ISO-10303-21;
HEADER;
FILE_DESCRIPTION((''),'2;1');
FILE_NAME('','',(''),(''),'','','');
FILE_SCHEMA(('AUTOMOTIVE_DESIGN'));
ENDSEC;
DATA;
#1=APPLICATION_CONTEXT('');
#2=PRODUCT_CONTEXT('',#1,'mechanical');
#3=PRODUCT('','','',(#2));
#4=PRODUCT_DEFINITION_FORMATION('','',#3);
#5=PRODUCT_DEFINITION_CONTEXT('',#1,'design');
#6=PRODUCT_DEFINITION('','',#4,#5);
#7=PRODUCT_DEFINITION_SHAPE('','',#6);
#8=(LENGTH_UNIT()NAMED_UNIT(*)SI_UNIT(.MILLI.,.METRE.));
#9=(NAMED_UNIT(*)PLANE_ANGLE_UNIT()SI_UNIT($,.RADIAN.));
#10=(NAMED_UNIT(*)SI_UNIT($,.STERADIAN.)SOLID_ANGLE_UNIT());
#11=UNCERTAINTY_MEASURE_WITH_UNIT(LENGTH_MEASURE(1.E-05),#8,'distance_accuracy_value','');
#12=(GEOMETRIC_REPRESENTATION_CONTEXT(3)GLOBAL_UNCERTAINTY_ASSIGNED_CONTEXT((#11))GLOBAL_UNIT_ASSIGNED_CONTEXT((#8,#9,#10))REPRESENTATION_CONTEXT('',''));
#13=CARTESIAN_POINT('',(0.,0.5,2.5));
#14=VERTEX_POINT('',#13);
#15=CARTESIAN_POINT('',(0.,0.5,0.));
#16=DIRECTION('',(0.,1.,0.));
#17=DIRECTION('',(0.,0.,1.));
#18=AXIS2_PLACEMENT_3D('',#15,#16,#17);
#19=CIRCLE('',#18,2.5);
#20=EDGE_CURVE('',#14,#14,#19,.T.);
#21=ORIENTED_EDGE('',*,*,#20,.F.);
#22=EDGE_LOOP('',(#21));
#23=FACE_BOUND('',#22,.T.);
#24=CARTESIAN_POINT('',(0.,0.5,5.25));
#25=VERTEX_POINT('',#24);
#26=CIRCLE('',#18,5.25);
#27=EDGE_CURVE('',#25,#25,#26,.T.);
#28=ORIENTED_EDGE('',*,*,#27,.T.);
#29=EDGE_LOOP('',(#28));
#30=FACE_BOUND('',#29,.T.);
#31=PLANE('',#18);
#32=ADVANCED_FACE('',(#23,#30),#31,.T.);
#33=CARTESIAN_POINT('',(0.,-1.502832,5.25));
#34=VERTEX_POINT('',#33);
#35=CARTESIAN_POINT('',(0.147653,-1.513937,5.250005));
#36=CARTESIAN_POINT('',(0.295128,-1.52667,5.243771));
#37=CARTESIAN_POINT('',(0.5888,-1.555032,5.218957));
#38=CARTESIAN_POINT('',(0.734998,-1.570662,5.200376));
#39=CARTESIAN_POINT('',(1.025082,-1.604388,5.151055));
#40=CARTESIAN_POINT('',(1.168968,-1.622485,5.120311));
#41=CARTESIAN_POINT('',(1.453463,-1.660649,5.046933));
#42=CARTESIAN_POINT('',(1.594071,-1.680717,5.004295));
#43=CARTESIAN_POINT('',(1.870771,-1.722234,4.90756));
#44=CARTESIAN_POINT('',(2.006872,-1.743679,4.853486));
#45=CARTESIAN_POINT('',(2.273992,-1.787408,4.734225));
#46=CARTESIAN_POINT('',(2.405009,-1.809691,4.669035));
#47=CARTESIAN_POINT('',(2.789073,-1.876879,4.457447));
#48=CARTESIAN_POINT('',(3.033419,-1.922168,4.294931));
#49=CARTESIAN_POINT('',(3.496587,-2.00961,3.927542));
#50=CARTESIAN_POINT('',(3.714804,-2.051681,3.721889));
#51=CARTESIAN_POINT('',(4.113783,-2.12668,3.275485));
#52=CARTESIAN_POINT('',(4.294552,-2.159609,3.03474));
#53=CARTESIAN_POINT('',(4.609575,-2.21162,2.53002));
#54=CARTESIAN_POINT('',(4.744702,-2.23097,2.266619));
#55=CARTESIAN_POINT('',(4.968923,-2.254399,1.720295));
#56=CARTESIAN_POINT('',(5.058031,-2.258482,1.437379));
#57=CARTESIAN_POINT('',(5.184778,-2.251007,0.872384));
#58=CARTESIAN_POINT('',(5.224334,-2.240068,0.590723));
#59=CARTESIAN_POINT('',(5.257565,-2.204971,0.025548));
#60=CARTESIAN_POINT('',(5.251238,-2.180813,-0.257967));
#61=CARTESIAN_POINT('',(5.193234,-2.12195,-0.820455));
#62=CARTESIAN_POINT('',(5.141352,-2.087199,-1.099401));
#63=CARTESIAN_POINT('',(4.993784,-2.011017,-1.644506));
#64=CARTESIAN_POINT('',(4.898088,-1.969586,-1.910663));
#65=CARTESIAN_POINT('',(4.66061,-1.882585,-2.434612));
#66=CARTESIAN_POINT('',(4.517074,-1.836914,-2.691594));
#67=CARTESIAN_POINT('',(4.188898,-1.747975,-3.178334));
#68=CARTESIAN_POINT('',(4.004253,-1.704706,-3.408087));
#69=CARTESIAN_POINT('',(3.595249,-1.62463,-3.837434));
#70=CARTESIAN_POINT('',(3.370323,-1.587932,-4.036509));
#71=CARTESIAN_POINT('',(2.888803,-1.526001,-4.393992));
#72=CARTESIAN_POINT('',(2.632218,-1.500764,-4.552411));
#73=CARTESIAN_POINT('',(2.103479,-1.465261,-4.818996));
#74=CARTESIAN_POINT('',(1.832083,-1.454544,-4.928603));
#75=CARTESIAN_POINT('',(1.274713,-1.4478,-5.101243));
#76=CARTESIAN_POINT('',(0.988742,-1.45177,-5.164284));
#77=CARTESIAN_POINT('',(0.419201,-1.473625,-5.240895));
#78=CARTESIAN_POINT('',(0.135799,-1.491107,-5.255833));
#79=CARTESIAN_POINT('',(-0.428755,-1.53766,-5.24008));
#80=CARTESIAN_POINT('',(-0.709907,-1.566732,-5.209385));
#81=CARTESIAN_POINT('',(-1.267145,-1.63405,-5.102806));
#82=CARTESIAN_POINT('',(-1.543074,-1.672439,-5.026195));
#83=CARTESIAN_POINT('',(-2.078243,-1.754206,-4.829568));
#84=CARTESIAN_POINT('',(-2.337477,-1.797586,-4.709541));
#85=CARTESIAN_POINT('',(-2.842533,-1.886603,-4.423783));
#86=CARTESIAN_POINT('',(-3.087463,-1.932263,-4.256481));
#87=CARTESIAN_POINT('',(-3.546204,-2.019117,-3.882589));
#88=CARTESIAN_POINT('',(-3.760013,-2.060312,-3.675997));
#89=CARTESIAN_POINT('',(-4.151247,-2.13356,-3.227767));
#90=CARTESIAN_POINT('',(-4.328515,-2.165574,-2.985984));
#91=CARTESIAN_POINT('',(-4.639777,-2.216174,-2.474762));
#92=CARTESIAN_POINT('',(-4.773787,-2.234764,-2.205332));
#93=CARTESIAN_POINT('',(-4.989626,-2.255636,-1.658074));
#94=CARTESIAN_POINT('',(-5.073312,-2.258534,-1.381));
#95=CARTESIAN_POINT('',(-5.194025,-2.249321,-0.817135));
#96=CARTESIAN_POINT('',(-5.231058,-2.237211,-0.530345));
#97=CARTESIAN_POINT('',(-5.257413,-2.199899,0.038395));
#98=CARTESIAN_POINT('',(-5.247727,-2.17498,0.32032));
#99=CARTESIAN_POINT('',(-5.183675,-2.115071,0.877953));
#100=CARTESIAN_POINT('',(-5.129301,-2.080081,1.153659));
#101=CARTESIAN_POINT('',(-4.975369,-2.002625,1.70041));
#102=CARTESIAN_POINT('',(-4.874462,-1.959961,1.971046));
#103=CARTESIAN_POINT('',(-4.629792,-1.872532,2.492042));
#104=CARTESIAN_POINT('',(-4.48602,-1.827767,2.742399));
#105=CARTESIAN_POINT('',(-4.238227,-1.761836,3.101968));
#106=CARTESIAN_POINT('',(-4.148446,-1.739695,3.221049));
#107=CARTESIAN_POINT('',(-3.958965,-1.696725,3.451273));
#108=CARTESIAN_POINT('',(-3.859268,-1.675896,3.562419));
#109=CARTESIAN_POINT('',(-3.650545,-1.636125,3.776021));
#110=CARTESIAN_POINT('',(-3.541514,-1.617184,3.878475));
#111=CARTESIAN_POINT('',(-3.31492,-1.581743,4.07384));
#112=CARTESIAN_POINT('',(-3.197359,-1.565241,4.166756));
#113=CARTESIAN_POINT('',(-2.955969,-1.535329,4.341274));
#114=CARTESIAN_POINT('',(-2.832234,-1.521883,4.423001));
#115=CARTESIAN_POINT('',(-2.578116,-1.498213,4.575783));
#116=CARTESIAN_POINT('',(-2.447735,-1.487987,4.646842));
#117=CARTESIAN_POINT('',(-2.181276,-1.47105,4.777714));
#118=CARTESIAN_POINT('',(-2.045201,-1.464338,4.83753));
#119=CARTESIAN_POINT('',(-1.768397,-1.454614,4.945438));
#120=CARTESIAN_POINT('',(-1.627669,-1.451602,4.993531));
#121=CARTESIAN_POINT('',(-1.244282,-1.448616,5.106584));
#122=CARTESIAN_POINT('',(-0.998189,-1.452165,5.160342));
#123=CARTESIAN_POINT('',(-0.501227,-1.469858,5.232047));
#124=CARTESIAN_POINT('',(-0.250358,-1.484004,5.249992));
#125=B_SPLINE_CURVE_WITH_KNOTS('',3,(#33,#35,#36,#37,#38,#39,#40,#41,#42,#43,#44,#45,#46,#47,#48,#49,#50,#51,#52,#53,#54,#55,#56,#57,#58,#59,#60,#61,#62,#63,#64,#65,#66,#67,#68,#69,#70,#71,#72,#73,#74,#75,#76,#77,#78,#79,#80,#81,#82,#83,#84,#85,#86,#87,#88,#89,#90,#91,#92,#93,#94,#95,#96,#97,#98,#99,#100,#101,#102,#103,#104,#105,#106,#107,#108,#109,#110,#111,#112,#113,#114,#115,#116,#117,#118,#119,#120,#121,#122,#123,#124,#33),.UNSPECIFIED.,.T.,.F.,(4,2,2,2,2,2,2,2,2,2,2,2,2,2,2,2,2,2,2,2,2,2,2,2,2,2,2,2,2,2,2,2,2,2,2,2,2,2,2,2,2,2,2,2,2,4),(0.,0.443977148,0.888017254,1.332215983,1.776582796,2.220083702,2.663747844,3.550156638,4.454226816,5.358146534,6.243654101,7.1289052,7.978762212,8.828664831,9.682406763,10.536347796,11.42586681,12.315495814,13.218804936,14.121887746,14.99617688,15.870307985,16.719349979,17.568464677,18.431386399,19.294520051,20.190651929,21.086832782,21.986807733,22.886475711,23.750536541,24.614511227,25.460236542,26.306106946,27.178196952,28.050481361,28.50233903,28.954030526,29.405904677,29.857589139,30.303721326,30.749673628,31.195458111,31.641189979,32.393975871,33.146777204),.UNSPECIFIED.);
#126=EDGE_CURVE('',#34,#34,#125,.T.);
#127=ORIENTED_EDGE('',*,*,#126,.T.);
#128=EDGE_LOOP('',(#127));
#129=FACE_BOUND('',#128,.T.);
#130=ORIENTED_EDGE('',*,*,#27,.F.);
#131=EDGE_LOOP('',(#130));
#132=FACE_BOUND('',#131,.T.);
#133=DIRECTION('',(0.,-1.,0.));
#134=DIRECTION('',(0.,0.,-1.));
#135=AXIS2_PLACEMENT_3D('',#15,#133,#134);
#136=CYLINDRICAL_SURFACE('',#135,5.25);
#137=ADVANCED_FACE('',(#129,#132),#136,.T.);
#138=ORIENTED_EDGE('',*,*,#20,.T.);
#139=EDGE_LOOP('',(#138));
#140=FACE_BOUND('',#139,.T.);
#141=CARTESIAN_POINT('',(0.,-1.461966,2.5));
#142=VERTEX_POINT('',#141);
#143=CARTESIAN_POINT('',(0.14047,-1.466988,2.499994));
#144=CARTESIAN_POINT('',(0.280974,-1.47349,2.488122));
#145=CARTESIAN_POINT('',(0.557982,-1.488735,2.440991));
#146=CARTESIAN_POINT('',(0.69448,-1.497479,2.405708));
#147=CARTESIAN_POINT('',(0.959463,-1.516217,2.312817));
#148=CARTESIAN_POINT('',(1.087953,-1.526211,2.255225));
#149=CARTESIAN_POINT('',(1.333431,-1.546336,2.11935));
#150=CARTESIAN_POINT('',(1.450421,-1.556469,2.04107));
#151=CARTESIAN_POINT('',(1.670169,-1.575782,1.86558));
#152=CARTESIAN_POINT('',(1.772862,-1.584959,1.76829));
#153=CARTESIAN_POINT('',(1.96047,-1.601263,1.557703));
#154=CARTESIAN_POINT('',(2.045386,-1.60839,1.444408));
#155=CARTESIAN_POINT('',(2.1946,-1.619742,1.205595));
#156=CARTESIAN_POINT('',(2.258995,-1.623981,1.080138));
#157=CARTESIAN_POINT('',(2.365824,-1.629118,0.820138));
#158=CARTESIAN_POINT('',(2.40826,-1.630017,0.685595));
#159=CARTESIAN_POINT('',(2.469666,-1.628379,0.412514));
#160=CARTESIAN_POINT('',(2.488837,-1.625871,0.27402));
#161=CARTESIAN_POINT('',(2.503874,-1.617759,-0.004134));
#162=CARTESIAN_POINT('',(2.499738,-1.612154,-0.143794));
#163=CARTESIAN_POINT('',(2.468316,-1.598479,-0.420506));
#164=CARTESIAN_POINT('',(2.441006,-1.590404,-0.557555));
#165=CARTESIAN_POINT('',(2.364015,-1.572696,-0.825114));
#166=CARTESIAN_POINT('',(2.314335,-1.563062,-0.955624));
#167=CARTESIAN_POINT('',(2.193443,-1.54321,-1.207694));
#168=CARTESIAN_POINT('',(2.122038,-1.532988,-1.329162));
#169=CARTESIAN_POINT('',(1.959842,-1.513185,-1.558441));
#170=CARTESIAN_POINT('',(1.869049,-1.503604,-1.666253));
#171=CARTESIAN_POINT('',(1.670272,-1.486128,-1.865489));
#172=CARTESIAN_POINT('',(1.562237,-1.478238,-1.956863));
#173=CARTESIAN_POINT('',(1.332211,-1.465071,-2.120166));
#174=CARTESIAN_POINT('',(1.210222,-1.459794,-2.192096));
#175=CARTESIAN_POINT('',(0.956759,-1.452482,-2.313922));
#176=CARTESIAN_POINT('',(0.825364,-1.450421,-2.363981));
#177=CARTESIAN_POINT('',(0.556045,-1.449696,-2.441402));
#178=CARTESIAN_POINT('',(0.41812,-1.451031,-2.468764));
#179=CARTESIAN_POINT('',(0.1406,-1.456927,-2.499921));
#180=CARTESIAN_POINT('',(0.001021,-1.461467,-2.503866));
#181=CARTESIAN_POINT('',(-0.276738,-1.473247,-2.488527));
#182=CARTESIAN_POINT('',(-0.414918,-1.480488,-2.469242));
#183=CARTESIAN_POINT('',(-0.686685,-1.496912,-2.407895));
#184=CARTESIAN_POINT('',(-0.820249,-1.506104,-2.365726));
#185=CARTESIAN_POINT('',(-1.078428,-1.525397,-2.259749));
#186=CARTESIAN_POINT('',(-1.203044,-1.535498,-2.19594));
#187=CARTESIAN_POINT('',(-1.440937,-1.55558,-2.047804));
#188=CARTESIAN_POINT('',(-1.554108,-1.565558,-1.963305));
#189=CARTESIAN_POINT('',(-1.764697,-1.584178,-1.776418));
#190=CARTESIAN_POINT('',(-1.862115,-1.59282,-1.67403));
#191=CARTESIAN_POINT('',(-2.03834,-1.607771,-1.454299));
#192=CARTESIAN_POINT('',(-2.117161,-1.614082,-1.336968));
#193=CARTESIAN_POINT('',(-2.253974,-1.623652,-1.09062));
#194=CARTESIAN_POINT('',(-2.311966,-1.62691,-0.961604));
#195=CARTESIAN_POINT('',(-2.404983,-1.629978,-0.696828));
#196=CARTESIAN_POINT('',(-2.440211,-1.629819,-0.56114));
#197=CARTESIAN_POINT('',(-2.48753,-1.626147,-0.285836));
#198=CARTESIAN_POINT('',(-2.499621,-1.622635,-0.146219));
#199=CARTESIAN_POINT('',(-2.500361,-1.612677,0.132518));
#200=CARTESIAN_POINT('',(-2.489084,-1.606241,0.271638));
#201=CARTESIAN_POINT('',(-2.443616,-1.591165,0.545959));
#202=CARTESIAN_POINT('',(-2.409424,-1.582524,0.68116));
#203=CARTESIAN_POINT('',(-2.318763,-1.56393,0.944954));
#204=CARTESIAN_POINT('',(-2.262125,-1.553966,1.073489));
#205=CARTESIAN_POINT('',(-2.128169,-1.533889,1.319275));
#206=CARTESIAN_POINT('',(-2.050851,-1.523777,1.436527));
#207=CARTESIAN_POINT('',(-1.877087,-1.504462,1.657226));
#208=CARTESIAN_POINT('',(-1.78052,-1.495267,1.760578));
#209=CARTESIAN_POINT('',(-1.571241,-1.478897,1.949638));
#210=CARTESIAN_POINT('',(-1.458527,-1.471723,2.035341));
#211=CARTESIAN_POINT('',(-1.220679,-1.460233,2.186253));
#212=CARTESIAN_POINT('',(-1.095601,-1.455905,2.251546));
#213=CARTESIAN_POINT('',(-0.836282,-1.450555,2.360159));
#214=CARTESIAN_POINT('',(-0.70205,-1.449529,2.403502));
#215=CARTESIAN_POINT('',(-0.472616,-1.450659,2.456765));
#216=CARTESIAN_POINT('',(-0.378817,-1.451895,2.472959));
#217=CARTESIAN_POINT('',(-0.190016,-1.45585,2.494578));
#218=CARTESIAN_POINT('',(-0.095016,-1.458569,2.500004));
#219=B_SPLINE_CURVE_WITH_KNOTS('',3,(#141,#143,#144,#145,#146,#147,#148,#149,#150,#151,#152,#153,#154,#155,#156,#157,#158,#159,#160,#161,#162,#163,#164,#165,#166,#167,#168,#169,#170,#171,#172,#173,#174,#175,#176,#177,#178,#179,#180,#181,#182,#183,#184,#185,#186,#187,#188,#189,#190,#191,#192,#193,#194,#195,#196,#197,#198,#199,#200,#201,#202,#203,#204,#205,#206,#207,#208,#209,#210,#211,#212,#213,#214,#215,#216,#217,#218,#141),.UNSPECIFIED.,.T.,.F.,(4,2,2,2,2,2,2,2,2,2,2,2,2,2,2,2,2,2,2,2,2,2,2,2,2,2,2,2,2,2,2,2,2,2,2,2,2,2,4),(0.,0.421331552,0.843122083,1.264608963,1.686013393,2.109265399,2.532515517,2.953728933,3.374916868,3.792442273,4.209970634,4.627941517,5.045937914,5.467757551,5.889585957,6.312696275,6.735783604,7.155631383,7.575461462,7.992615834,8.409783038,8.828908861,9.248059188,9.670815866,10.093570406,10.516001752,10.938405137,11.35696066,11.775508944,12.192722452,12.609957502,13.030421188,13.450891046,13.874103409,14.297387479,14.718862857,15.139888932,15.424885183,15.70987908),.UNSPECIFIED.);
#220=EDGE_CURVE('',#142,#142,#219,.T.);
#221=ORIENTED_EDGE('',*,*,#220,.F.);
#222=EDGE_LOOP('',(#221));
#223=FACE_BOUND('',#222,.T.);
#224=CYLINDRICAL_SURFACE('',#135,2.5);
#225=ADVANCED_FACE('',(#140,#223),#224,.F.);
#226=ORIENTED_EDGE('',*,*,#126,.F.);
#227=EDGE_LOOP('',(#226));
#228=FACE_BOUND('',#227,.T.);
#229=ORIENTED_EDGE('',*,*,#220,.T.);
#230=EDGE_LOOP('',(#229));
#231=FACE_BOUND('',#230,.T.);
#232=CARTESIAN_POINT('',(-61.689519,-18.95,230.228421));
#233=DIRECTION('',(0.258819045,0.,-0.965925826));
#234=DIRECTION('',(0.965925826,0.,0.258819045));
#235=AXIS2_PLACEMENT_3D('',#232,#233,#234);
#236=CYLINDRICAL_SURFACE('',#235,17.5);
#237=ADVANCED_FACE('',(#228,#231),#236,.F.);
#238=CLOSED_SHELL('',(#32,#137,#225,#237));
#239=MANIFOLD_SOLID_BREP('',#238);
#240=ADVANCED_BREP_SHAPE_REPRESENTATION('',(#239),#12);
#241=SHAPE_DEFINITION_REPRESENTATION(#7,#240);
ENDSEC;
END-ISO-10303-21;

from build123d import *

# Parameters (mm, degrees)
SKETCH1_R                   = 5.25
SKETCH1_R_2                 = 2.5
BOSS_EXTRUDE1_DEPTH         = 0.5
BOSS_EXTRUDE2_START         = -1.450000367
BOSS_EXTRUDE2_OUTLINE_R     = 5.25
BOSS_EXTRUDE2_OUTLINE_R_2   = 2.5
BOSS_EXTRUDE2_DEPTH         = 1.450000367
BOSS_EXTRUDE2_START_2       = -2.256053573
BOSS_EXTRUDE2_2_OUTLINE_R   = 5.25
BOSS_EXTRUDE2_2_OUTLINE_R_2 = 2.5
BOSS_EXTRUDE2_2_DEPTH       = 0.806053206
BOSS_EXTRUDE2_START_3       = -6
BOSS_EXTRUDE2_3_DEPTH       = 12


with BuildPart() as part:
    # Sketch1 → Boss-Extrude1 (new body)
    with BuildSketch(Plane(origin=(0, 0, 0), x_dir=(1, 0, 0), z_dir=(0, 1, 0))):
        with Locations(Location((0, 0, 0), (0, 0, 270))):
            Circle(SKETCH1_R)
        with Locations(Location((0, 0, 0), (0, 0, 270))):
            Circle(SKETCH1_R_2, mode=Mode.SUBTRACT)
    extrude(amount=BOSS_EXTRUDE1_DEPTH)

    # Boss-Extrude2: read off the stored shape, not the designer's step
    # Boss-Extrude2 outline → Boss-Extrude2 (add)
    with BuildSketch(Plane(origin=(0, 0, 0), x_dir=(1, 0, 0), z_dir=(0, 1, 0)).offset(BOSS_EXTRUDE2_START)):
        Circle(BOSS_EXTRUDE2_OUTLINE_R)
        Circle(BOSS_EXTRUDE2_OUTLINE_R_2, mode=Mode.SUBTRACT)
    extrude(amount=BOSS_EXTRUDE2_DEPTH)

    # Boss-Extrude2 2 outline → Boss-Extrude2 2 (add)
    with BuildSketch(Plane(origin=(0, 0, 0), x_dir=(1, 0, 0), z_dir=(0, 1, 0)).offset(BOSS_EXTRUDE2_START_2)):
        Circle(BOSS_EXTRUDE2_2_OUTLINE_R)
        Circle(BOSS_EXTRUDE2_2_OUTLINE_R_2, mode=Mode.SUBTRACT)
    extrude(amount=BOSS_EXTRUDE2_2_DEPTH)

    # Boss-Extrude2 3 outline → Boss-Extrude2 3 (cut)
    with BuildSketch(Plane(origin=(0, 0, 0), x_dir=(0.9659258262890679, 0, 0.258819045102522), z_dir=(0.258819045102522, 0, -0.965925826289068)).offset(BOSS_EXTRUDE2_START_3)):
        with BuildLine():
            Line((5.249997023, 2.256063039), (-5.249997023, 2.256063039))
            ThreePointArc((-5.249997023, 2.256063039), (0, 1.45), (5.249997023, 2.256063039))
        make_face()
    extrude(amount=BOSS_EXTRUDE2_3_DEPTH, mode=Mode.SUBTRACT)


solid = part.part
